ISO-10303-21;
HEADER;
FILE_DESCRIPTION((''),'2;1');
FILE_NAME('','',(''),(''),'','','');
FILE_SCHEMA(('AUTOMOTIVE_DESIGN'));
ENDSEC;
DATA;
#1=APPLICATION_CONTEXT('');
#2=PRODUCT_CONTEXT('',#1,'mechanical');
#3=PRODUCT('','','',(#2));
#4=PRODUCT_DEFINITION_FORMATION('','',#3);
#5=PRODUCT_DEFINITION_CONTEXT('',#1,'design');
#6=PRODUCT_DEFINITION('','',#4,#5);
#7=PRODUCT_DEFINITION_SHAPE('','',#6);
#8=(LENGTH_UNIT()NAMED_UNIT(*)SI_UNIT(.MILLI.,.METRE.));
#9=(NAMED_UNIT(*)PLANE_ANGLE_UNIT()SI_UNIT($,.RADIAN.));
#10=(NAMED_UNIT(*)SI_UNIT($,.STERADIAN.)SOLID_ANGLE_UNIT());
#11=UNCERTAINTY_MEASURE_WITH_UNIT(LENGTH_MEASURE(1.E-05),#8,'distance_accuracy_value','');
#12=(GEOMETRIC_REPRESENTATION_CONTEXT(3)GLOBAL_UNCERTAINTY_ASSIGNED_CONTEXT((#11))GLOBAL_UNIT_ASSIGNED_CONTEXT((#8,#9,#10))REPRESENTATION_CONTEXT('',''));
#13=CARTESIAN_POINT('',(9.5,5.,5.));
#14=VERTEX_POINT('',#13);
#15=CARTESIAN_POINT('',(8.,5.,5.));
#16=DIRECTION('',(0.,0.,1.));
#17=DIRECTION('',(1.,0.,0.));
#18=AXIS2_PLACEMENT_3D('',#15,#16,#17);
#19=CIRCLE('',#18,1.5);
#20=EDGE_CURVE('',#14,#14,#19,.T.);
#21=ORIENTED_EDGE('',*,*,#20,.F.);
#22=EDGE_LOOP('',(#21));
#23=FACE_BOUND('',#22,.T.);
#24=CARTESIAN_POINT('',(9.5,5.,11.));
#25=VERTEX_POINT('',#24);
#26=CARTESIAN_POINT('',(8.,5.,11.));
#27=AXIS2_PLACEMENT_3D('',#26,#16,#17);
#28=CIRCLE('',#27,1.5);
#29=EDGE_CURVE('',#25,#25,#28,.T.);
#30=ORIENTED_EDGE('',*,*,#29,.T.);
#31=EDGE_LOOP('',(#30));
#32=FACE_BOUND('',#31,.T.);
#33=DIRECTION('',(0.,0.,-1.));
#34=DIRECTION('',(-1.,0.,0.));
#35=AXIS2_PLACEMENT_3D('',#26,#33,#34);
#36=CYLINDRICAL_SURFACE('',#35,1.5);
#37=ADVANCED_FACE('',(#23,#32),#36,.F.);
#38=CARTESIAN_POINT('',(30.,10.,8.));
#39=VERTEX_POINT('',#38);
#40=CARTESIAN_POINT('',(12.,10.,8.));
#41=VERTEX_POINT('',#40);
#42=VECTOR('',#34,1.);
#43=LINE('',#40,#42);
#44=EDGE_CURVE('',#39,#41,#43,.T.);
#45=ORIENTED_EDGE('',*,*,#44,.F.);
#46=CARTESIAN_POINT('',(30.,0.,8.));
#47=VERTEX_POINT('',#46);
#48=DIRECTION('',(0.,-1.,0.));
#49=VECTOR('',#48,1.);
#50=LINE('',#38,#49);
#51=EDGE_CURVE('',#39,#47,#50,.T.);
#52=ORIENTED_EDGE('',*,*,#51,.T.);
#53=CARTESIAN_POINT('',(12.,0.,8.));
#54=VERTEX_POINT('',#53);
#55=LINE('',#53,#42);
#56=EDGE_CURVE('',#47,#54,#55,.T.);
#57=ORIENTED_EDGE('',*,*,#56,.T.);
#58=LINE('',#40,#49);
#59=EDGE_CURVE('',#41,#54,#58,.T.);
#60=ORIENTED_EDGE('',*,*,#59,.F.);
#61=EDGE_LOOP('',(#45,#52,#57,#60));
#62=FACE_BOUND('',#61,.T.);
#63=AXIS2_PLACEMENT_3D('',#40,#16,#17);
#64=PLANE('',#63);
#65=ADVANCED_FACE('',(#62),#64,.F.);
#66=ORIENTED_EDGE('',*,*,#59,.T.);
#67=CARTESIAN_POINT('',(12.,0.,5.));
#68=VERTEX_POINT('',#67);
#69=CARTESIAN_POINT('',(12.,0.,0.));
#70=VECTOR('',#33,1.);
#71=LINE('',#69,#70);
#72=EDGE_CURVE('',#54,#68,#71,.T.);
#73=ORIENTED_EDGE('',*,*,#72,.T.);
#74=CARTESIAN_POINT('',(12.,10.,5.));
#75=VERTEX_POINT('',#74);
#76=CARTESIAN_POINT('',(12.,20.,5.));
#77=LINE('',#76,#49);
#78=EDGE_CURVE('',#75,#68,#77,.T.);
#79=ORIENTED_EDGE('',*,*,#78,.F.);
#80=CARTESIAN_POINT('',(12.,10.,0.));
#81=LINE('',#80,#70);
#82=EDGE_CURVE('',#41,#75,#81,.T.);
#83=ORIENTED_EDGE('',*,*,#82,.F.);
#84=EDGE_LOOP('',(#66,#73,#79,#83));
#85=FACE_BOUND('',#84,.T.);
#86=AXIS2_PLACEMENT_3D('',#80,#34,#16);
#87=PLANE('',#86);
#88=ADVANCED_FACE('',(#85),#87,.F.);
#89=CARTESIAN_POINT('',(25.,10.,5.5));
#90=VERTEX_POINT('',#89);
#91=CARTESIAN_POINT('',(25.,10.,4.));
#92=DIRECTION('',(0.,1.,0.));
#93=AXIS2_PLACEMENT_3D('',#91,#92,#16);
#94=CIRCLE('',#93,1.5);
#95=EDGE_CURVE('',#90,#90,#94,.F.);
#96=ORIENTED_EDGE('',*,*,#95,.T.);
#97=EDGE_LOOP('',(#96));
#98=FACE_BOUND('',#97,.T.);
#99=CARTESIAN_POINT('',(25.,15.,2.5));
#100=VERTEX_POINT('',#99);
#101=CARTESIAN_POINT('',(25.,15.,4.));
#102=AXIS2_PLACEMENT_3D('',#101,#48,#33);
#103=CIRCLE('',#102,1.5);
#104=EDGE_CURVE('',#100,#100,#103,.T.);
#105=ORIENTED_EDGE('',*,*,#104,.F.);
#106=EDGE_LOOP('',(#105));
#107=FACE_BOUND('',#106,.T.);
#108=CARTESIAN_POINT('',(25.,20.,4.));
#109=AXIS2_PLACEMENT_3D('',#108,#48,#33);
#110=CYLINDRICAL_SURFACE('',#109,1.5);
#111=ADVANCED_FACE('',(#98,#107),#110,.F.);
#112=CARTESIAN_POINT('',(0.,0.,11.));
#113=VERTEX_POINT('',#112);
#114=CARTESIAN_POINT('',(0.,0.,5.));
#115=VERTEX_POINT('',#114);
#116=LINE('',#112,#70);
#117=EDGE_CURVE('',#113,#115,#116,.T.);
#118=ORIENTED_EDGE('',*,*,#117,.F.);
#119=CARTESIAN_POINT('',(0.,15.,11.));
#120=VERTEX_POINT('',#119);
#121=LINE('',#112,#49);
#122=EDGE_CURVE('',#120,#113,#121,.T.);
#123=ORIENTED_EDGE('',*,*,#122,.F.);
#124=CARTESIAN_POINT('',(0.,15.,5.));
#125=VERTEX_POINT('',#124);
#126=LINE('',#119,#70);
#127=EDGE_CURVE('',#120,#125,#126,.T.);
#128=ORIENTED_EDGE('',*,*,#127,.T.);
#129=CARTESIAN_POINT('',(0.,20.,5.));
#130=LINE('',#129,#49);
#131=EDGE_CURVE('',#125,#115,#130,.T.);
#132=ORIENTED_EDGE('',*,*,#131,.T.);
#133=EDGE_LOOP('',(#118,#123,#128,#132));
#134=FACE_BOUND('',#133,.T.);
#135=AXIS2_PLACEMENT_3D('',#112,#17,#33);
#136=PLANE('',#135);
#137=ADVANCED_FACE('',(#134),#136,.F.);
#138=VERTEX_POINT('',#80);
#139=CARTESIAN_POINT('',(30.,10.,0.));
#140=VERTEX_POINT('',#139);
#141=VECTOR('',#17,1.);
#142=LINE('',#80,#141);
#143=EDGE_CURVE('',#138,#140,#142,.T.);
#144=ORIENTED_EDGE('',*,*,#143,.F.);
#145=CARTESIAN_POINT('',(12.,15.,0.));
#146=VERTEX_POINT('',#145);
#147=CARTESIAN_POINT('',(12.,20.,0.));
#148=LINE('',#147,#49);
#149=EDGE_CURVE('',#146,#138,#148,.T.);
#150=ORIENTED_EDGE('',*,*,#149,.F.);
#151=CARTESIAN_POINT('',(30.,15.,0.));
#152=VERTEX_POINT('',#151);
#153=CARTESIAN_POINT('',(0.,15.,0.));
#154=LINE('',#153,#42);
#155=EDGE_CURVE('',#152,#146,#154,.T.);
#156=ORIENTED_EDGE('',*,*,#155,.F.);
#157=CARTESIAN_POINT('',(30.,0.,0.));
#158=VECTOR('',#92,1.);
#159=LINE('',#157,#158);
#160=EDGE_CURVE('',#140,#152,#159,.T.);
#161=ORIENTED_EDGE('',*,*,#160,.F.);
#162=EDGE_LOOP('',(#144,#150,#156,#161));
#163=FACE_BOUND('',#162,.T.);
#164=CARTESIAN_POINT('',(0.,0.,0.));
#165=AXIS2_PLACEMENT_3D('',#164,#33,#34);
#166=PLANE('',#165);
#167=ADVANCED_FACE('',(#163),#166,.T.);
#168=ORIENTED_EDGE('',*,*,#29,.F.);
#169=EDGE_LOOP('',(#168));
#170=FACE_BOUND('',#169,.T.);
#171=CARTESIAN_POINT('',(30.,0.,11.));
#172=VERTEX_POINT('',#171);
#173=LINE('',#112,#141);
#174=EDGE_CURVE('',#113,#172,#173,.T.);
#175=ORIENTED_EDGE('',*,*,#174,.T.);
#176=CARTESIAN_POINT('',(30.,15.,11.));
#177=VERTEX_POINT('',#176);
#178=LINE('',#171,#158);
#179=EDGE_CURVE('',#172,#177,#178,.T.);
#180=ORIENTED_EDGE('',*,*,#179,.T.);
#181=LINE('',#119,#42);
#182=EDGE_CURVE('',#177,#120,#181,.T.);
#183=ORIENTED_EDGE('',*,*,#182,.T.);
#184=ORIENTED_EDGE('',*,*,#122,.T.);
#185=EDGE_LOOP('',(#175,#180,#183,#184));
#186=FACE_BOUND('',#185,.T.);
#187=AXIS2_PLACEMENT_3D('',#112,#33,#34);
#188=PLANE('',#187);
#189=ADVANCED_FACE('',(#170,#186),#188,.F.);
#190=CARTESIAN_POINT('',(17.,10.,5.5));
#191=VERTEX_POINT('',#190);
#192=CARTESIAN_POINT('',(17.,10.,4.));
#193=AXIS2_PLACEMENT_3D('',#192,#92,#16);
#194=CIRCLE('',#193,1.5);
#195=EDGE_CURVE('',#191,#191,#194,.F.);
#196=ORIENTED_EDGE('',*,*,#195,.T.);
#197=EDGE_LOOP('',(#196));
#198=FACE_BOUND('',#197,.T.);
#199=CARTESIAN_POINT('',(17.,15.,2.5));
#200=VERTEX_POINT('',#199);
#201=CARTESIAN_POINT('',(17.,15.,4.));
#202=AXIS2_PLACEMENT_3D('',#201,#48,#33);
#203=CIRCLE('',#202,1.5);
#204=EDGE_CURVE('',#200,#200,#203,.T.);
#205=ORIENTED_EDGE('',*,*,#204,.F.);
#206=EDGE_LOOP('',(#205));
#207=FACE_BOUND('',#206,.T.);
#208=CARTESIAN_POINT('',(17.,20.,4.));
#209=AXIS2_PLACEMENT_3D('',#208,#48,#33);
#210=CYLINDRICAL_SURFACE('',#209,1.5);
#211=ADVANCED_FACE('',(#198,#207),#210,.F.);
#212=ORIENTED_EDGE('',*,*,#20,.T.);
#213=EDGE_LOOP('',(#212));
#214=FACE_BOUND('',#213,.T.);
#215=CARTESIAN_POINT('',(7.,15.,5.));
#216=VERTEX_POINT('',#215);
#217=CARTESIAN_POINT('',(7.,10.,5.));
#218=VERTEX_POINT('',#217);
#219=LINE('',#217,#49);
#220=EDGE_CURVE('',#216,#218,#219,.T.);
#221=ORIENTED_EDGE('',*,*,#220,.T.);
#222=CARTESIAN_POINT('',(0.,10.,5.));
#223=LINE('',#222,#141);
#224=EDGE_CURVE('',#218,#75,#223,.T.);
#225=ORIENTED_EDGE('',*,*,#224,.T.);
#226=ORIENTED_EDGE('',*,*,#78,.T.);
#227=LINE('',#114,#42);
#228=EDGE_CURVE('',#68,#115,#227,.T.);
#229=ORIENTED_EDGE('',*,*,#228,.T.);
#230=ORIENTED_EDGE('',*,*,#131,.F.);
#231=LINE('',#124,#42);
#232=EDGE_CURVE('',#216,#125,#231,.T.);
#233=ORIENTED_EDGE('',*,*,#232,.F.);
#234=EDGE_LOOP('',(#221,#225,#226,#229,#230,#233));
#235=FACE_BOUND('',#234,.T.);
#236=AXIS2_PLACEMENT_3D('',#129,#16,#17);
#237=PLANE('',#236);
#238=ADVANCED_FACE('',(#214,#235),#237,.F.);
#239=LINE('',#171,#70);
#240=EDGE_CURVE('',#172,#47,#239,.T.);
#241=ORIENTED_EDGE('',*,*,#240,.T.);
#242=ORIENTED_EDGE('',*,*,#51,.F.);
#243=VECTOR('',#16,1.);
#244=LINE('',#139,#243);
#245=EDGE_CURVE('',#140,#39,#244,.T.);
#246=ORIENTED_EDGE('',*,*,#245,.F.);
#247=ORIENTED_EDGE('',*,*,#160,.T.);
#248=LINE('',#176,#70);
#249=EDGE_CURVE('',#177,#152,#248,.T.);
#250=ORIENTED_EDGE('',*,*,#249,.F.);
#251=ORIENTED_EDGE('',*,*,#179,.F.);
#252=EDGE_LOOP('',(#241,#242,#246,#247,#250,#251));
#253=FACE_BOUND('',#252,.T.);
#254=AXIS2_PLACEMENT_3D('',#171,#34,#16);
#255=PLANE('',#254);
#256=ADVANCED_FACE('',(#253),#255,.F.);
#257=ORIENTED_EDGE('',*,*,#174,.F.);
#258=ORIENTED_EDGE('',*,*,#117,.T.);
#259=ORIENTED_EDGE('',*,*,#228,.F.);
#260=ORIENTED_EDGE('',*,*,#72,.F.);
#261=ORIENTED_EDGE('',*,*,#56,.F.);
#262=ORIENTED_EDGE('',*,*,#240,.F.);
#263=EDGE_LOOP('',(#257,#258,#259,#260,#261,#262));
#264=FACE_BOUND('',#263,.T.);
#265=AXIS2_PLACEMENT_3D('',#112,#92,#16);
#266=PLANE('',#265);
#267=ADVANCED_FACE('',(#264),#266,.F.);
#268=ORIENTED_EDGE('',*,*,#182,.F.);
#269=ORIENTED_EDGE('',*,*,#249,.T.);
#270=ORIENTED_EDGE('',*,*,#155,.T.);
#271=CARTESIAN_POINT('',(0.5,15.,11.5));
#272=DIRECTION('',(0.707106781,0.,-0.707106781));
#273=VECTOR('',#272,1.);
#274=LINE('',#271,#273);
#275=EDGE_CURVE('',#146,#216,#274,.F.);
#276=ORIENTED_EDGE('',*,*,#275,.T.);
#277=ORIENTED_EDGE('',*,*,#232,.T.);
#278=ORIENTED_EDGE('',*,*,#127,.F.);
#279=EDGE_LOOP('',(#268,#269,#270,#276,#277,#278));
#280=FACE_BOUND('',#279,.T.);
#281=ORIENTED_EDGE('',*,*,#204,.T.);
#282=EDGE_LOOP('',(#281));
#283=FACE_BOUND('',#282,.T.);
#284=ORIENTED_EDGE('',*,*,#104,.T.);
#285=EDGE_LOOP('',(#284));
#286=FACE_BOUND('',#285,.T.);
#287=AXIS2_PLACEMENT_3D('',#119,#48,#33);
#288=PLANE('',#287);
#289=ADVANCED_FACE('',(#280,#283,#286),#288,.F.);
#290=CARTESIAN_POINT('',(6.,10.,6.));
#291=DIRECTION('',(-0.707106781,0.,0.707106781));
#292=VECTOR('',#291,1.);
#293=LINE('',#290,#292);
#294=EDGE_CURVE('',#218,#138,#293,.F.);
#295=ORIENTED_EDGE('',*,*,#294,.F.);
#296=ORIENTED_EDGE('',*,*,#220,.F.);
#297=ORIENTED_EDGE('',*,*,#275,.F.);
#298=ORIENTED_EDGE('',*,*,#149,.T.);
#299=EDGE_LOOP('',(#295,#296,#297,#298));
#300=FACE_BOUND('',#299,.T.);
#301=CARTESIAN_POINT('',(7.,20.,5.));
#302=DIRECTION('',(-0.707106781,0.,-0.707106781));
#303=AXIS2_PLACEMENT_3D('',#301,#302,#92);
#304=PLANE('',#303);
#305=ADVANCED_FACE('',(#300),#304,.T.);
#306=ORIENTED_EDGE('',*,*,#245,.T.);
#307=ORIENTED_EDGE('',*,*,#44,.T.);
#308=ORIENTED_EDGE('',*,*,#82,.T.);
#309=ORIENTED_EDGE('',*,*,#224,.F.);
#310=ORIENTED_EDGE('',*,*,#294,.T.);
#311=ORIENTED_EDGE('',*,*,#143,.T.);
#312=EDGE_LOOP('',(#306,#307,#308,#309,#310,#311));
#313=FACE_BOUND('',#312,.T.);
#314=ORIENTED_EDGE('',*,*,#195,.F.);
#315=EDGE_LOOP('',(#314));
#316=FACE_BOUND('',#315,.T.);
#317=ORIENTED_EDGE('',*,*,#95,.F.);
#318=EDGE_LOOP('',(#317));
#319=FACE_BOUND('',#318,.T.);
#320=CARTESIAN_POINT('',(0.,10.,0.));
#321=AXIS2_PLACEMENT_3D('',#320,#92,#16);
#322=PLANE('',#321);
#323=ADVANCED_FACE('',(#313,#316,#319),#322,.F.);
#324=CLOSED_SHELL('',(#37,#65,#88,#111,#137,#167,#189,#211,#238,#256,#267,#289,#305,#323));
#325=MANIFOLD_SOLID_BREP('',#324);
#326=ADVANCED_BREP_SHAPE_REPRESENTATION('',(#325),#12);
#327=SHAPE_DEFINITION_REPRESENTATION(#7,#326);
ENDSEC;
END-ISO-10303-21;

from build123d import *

# Parameters (mm, degrees)
SKETCH_1_W          = 30
SKETCH_1_H          = 15
SKETCH_1_R          = 1.5
EXTRUDE_1_DEPTH     = 11
SKETCH_2_R          = 1.5
CUT_EXTRUDE_1_DEPTH = 20
SKETCH_3_W          = 12
SKETCH_3_H          = 5
CUT_EXTRUDE_2_DEPTH = 20
SKETCH_5_W          = 18
SKETCH_5_H          = 8
CUT_EXTRUDE_3_DEPTH = 10
CHAMFER_1_SIZE      = 5


with BuildPart() as part:
    # 草图1 → 凸台-拉伸1 (new body)
    with BuildSketch(Plane.XY):
        with Locations((15, 7.5)):
            Rectangle(SKETCH_1_W, SKETCH_1_H)
        with Locations((8, 5)):
            Circle(SKETCH_1_R, mode=Mode.SUBTRACT)
    extrude(amount=EXTRUDE_1_DEPTH)

    # 草图2 → 切除-拉伸1 (cut)
    with BuildSketch(Plane.XZ):
        with Locations(Location((25, 4, 0), (0, 0, 270))):
            Circle(SKETCH_2_R)
        with Locations(Location((17, 4, 0), (0, 0, 270))):
            Circle(SKETCH_2_R)
    extrude(amount=-CUT_EXTRUDE_1_DEPTH, mode=Mode.SUBTRACT)

    # 草图3 → 切除-拉伸2 (cut)
    with BuildSketch(Plane.XZ):
        with Locations((6, 2.5)):
            Rectangle(SKETCH_3_W, SKETCH_3_H)
    extrude(amount=-CUT_EXTRUDE_2_DEPTH, mode=Mode.SUBTRACT)

    # 草图5 → 切除-拉伸3 (cut)
    with BuildSketch(Plane.XZ):
        with Locations((21, 4)):
            Rectangle(SKETCH_5_W, SKETCH_5_H)
    extrude(amount=-CUT_EXTRUDE_3_DEPTH, mode=Mode.SUBTRACT)

    # 倒角1
    chamfer_1_edges = [part.edges().sort_by_distance(p)[0] for p in [
        (12, 12.5, 5),
    ]]
    chamfer(chamfer_1_edges, length=CHAMFER_1_SIZE - 0.0001)  # a hair under: the kernel refuses the full size


solid = part.part
